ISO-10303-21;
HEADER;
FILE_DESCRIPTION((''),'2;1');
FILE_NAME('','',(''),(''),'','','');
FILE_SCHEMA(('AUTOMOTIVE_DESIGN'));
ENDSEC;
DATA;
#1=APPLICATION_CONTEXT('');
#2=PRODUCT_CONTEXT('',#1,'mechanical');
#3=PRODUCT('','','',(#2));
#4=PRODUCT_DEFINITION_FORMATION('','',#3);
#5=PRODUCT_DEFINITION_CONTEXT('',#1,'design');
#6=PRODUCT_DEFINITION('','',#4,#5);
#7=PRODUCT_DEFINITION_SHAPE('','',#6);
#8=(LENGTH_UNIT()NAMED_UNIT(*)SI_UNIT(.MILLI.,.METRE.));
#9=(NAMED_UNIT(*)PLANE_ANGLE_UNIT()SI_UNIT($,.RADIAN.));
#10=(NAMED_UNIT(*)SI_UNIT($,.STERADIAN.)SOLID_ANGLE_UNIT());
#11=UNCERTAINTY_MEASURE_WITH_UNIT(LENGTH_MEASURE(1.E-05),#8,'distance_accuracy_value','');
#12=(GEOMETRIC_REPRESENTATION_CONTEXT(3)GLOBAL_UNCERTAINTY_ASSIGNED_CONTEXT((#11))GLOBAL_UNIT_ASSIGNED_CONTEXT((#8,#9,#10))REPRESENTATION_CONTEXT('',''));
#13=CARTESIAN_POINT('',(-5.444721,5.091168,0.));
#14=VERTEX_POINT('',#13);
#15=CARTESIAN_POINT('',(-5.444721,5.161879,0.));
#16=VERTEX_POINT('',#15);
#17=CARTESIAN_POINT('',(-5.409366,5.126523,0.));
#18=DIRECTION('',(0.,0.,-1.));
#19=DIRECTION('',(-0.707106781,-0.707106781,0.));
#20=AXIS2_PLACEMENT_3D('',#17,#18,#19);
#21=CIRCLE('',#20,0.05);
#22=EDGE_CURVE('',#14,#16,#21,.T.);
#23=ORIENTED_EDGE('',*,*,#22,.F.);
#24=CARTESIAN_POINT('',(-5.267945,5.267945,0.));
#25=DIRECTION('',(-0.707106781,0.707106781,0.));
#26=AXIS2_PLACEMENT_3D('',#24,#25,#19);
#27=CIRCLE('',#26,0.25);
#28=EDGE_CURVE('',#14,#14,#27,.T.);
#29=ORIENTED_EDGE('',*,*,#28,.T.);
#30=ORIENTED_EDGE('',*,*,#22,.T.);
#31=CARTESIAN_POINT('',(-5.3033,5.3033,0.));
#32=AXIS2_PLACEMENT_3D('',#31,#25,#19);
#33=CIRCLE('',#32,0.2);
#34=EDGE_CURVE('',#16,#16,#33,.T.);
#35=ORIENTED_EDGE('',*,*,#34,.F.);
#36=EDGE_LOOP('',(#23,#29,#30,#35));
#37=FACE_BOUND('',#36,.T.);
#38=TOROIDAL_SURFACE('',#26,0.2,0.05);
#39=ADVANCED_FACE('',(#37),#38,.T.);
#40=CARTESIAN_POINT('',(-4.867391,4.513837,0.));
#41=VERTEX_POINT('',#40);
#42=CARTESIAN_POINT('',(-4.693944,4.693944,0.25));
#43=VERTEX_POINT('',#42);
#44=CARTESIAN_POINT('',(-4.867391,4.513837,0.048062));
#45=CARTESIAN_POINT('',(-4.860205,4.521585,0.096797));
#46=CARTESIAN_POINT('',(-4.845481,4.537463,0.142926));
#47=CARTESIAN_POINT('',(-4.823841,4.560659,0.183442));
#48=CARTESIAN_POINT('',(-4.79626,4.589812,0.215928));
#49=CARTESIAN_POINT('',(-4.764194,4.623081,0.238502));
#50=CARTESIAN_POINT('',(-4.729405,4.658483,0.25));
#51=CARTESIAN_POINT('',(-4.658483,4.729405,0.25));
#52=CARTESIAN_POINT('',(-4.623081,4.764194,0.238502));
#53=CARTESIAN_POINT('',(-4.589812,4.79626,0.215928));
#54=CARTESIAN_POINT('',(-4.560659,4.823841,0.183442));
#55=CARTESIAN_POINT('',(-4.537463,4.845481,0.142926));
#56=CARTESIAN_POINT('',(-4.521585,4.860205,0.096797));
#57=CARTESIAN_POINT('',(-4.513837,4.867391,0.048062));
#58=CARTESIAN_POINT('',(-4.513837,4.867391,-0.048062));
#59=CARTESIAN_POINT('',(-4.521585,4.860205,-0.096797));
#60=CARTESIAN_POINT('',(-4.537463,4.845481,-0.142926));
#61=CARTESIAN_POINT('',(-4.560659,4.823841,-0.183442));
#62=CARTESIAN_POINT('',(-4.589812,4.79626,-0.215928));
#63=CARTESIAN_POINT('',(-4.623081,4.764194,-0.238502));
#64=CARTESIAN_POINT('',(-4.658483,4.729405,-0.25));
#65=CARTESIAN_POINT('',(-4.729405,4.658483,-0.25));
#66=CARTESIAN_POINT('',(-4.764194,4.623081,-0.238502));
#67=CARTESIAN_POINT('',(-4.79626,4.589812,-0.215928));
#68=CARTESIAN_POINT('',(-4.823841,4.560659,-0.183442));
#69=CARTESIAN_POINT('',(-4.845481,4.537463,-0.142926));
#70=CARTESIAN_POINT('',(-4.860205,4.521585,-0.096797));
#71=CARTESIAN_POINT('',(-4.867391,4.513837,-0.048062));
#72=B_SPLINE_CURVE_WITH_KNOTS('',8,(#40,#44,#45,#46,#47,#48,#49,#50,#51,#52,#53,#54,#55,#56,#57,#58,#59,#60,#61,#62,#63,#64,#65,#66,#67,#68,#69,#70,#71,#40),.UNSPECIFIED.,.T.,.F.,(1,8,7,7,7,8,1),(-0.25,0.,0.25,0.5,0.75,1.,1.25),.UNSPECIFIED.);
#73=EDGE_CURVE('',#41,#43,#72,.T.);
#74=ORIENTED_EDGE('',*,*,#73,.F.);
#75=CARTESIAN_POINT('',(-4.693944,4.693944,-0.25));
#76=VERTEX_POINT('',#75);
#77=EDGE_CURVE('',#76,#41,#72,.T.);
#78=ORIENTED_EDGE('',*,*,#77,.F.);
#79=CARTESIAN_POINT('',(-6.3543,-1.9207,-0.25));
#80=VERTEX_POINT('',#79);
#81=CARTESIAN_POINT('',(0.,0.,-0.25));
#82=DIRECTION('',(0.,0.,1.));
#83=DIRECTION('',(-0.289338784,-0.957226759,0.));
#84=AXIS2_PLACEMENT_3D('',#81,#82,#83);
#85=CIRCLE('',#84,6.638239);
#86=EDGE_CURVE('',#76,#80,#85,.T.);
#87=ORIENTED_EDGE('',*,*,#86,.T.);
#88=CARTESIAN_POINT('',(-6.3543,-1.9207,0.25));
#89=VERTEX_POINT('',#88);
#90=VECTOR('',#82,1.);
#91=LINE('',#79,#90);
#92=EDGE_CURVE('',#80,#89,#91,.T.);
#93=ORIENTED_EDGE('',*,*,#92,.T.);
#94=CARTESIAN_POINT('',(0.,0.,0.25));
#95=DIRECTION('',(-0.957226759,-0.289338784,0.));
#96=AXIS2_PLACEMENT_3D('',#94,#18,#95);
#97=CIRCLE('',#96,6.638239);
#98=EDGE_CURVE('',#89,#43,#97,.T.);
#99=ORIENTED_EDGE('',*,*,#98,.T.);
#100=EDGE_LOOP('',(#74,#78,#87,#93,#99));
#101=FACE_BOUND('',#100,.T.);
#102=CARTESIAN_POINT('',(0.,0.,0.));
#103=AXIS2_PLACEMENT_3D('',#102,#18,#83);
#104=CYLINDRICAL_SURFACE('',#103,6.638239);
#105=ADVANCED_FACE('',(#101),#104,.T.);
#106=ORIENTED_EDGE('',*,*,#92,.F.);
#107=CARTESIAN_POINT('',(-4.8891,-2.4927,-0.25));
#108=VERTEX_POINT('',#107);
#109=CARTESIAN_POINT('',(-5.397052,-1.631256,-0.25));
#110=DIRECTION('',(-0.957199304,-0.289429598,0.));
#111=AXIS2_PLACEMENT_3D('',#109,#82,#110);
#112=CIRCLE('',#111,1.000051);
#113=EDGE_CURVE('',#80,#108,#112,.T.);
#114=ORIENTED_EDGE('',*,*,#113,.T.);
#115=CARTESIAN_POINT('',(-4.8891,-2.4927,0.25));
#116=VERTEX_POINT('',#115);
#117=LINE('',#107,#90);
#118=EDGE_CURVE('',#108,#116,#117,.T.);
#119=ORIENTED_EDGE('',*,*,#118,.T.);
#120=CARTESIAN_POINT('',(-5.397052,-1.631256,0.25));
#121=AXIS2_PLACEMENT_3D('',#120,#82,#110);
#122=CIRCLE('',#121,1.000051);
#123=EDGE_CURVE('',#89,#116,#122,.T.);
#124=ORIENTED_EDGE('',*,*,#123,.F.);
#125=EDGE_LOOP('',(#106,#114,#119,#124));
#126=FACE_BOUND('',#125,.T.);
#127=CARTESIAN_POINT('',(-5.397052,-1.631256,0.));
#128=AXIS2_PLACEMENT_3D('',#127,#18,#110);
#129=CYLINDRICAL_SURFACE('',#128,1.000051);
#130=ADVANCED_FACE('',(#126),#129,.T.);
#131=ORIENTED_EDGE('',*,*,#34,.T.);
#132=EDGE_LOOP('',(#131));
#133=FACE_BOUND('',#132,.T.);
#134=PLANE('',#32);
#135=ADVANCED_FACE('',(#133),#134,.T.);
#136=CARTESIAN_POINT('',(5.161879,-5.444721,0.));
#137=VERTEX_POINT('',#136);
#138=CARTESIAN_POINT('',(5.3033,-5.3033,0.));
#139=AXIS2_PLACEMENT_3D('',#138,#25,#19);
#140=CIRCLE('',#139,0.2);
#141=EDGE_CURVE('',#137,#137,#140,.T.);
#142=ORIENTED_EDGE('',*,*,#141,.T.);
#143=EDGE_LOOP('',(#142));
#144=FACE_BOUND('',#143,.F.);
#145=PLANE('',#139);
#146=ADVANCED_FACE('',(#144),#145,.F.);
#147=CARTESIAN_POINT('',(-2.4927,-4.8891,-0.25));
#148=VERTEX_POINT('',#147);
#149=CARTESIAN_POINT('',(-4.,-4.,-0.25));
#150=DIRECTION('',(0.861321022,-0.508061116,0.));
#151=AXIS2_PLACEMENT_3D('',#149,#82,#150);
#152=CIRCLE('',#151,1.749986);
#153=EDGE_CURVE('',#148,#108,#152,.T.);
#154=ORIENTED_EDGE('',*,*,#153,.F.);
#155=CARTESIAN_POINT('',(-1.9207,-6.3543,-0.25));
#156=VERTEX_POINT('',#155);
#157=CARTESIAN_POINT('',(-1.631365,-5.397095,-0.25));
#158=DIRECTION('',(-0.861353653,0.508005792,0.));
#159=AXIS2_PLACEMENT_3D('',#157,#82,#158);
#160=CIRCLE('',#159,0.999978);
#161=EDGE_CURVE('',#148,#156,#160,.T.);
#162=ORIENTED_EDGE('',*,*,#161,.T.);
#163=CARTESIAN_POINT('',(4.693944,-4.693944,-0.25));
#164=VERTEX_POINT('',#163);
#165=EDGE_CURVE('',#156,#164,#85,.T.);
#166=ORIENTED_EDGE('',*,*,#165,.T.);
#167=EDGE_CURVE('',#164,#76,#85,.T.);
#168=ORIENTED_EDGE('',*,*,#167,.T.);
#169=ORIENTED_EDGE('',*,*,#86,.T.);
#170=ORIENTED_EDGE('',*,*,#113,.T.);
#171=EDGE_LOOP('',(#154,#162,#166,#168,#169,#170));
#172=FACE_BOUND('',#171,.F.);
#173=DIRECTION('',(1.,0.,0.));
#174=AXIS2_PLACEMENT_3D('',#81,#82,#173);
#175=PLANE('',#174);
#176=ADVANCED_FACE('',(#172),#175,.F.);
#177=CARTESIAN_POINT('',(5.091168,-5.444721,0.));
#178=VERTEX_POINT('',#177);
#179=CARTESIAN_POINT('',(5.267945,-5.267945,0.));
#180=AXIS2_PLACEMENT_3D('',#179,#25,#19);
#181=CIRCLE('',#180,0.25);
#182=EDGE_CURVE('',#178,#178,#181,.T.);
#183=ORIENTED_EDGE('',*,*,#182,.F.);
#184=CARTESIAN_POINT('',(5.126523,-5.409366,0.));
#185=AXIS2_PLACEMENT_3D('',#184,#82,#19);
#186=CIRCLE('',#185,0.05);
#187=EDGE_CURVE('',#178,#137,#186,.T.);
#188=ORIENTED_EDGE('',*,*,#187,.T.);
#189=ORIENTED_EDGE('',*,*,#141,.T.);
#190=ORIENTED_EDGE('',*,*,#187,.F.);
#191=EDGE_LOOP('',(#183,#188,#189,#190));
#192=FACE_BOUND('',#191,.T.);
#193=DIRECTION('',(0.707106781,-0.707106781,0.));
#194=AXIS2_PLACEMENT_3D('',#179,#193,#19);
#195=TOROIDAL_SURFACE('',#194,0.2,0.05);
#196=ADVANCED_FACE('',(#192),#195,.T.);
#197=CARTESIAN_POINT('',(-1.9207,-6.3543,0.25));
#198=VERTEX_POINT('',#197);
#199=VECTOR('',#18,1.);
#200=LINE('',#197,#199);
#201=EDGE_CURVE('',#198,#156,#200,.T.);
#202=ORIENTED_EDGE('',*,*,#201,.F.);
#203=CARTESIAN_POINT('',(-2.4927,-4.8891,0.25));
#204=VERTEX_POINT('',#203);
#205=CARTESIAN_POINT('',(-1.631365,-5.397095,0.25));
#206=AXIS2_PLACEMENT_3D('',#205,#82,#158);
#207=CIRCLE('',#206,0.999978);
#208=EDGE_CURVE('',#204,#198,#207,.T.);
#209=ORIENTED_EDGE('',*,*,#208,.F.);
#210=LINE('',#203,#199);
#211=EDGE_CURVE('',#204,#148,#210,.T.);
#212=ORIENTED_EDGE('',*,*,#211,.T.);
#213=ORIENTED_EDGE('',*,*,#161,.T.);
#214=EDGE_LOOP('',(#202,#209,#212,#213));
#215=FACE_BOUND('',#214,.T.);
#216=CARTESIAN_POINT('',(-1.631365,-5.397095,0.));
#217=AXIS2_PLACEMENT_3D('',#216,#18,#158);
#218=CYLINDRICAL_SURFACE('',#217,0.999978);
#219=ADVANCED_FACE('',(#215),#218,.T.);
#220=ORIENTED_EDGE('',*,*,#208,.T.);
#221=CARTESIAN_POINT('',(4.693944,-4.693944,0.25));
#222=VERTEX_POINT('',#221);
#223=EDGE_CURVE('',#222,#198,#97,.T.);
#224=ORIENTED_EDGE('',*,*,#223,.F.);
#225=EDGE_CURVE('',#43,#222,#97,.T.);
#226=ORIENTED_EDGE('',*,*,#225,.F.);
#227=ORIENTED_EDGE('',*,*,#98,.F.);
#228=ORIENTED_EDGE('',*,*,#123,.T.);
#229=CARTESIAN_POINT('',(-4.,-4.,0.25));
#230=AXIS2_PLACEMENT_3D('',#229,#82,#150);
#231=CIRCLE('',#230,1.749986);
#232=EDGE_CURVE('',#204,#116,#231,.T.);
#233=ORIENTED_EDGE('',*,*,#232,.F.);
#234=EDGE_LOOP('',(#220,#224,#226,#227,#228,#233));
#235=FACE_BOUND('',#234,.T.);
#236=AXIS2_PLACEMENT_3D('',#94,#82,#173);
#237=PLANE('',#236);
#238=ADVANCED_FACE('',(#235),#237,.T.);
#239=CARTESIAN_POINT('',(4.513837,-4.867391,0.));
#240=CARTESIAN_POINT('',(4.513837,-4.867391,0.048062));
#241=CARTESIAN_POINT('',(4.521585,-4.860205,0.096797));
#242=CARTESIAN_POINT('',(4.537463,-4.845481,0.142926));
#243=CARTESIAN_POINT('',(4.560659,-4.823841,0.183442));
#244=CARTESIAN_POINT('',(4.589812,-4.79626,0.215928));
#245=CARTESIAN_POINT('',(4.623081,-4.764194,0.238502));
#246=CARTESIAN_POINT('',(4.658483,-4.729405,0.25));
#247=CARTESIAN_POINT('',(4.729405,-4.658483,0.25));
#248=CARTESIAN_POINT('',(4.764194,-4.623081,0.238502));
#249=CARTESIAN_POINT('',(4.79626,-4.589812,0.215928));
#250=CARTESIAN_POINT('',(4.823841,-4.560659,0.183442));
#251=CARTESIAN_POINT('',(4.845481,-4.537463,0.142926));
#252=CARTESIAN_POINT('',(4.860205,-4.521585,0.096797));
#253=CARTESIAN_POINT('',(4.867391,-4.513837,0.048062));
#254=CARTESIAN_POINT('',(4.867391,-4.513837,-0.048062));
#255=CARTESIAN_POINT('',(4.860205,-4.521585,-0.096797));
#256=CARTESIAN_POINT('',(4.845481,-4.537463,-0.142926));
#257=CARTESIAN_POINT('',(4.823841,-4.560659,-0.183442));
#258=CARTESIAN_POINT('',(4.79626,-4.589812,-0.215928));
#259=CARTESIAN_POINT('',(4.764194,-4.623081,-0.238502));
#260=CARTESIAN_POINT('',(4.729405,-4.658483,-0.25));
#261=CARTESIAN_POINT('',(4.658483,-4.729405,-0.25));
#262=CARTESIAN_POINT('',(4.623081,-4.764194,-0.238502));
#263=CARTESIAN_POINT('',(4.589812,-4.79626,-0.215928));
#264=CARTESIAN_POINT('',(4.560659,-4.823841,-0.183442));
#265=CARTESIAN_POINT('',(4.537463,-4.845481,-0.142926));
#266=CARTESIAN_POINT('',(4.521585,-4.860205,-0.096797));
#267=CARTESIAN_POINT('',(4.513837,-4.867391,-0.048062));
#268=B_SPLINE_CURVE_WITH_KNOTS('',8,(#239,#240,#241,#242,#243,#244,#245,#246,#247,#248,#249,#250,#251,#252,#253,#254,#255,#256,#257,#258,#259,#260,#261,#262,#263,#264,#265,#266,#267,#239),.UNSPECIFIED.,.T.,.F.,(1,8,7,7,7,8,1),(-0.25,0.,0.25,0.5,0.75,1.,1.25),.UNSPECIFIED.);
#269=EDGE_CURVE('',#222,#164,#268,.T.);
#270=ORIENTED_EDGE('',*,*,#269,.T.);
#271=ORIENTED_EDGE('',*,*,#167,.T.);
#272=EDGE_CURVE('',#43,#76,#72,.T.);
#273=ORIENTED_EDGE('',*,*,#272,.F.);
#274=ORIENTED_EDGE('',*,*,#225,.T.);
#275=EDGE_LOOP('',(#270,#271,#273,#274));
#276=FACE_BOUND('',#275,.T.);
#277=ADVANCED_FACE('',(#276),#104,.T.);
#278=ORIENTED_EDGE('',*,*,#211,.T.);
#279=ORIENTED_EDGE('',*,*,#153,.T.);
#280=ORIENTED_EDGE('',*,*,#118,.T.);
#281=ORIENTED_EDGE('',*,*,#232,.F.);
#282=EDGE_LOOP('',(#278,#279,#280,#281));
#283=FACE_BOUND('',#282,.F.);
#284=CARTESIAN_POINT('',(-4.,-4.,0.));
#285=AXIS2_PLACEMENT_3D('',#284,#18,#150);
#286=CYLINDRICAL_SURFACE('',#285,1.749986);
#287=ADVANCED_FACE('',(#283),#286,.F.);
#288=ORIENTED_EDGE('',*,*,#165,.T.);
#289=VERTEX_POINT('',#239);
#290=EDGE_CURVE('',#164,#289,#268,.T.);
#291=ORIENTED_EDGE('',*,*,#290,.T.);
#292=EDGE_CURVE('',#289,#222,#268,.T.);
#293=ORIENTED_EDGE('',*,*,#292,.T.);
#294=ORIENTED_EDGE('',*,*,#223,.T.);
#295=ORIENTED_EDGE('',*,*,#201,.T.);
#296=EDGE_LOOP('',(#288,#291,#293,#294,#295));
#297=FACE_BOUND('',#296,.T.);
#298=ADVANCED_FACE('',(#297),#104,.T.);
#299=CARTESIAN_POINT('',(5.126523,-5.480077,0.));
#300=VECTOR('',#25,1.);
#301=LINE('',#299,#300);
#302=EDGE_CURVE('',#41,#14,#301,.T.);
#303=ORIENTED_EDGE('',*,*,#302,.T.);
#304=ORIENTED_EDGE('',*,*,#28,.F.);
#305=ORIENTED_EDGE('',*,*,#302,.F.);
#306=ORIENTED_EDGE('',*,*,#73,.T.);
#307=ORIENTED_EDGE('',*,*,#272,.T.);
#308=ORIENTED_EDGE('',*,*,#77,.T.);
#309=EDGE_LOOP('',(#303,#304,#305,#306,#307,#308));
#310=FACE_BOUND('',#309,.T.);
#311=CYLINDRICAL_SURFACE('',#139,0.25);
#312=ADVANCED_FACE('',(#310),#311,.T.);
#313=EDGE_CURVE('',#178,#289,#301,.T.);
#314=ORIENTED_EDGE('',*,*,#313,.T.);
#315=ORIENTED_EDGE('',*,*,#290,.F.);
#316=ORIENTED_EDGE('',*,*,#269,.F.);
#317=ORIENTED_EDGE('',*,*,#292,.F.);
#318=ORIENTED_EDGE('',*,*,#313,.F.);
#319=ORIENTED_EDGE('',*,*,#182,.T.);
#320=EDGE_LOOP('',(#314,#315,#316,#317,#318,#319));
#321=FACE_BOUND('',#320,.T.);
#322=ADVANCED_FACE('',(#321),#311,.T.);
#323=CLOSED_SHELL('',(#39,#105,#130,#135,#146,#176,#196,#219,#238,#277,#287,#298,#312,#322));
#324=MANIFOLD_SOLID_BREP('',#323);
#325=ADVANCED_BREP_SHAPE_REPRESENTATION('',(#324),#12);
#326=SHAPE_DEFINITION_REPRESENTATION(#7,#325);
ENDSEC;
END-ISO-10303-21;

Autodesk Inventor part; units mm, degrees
ref_plane "YZ Plane" through (0, 0, 0) normal (1, 0, 0) x (0, 1, 0)
ref_plane "XZ Plane" through (0, 0, 0) normal (0, 1, 0) x (-1, 0, 0)
sketch "Sketch1" plane through (0, 0, 0) normal (0, 0, 1) x (1, 0, 0)
  circle A0 centre (-4, -4) radius 0.9814 construction
  circle A1 centre (4, 4) radius 0.9814 construction
  line L0 (-7, -7) -> (7, -7) construction
  line L1 (-7, 7) -> (-7, -7) construction
  line L2 (7, 7) -> (-7, 7) construction
  line L3 (7, -7) -> (7, 7) construction
  line L4 (0, -7) -> (0, 7)
  line L5 (-7, 0) -> (7, 0)
  arc A2 (-1.9207, -6.3543) -> (-6.3543, -1.9207) centre (0, 0) ccw
  arc A3 (-2.4927, -4.8891) -> (-4.8891, -2.4927) centre (-4, -4) ccw
  arc A4 (-2.4927, -4.8891) -> (-1.9207, -6.3543) centre (-1.6313, -5.3971) ccw
  arc A5 (-6.3543, -1.9207) -> (-4.8891, -2.4927) centre (-5.3971, -1.6313) ccw
  point P0 (0, 0)
  dimension "d0" = 3
  dimension "d1" = 3
  dimension "d2" = 3
  dimension "d3" = 3
  dimension "d4" = 3.5
  dimension "d5" = 1
extrude "Extrusion1" add sketch "Sketch1" along normal mid plane 0.5
sketch "Sketch4" plane through (0, 0, 0) normal (0, 0, 1) x (1, 0, 0)
  line L0 (5.3033, -5.3033) -> (-5.3033, 5.3033)
  line L1 (0, 0) -> (0, 0.8225) construction
  dimension "d9" = 45
  dimension "d11" = 7.5
  dimension "d12" = 7.5
ref_plane "Work Plane1" through (5.3033, -5.3033, 0) normal (-0.7071068, 0.7071068, 0) x (-0.7071068, -0.7071068, 0)
sketch "Sketch5" plane through (5.3033, -5.3033, 0) normal (-0.7071068, 0.7071068, 0) x (-0.7071068, -0.7071068, 0)
  circle A0 centre (0, 0) radius 0.25
  point P0 (0, 0)
  dimension "d10" = 0.5
sweep "Sweep1" add profiles "Sketch5" path "Sketch4"
fillet "Fillet1" radius 0.05 2 edges at (5.4801, -5.1265, 0) (-5.1265, 5.4801, 0)
properties part number "coin" material "ABS Plastic"
